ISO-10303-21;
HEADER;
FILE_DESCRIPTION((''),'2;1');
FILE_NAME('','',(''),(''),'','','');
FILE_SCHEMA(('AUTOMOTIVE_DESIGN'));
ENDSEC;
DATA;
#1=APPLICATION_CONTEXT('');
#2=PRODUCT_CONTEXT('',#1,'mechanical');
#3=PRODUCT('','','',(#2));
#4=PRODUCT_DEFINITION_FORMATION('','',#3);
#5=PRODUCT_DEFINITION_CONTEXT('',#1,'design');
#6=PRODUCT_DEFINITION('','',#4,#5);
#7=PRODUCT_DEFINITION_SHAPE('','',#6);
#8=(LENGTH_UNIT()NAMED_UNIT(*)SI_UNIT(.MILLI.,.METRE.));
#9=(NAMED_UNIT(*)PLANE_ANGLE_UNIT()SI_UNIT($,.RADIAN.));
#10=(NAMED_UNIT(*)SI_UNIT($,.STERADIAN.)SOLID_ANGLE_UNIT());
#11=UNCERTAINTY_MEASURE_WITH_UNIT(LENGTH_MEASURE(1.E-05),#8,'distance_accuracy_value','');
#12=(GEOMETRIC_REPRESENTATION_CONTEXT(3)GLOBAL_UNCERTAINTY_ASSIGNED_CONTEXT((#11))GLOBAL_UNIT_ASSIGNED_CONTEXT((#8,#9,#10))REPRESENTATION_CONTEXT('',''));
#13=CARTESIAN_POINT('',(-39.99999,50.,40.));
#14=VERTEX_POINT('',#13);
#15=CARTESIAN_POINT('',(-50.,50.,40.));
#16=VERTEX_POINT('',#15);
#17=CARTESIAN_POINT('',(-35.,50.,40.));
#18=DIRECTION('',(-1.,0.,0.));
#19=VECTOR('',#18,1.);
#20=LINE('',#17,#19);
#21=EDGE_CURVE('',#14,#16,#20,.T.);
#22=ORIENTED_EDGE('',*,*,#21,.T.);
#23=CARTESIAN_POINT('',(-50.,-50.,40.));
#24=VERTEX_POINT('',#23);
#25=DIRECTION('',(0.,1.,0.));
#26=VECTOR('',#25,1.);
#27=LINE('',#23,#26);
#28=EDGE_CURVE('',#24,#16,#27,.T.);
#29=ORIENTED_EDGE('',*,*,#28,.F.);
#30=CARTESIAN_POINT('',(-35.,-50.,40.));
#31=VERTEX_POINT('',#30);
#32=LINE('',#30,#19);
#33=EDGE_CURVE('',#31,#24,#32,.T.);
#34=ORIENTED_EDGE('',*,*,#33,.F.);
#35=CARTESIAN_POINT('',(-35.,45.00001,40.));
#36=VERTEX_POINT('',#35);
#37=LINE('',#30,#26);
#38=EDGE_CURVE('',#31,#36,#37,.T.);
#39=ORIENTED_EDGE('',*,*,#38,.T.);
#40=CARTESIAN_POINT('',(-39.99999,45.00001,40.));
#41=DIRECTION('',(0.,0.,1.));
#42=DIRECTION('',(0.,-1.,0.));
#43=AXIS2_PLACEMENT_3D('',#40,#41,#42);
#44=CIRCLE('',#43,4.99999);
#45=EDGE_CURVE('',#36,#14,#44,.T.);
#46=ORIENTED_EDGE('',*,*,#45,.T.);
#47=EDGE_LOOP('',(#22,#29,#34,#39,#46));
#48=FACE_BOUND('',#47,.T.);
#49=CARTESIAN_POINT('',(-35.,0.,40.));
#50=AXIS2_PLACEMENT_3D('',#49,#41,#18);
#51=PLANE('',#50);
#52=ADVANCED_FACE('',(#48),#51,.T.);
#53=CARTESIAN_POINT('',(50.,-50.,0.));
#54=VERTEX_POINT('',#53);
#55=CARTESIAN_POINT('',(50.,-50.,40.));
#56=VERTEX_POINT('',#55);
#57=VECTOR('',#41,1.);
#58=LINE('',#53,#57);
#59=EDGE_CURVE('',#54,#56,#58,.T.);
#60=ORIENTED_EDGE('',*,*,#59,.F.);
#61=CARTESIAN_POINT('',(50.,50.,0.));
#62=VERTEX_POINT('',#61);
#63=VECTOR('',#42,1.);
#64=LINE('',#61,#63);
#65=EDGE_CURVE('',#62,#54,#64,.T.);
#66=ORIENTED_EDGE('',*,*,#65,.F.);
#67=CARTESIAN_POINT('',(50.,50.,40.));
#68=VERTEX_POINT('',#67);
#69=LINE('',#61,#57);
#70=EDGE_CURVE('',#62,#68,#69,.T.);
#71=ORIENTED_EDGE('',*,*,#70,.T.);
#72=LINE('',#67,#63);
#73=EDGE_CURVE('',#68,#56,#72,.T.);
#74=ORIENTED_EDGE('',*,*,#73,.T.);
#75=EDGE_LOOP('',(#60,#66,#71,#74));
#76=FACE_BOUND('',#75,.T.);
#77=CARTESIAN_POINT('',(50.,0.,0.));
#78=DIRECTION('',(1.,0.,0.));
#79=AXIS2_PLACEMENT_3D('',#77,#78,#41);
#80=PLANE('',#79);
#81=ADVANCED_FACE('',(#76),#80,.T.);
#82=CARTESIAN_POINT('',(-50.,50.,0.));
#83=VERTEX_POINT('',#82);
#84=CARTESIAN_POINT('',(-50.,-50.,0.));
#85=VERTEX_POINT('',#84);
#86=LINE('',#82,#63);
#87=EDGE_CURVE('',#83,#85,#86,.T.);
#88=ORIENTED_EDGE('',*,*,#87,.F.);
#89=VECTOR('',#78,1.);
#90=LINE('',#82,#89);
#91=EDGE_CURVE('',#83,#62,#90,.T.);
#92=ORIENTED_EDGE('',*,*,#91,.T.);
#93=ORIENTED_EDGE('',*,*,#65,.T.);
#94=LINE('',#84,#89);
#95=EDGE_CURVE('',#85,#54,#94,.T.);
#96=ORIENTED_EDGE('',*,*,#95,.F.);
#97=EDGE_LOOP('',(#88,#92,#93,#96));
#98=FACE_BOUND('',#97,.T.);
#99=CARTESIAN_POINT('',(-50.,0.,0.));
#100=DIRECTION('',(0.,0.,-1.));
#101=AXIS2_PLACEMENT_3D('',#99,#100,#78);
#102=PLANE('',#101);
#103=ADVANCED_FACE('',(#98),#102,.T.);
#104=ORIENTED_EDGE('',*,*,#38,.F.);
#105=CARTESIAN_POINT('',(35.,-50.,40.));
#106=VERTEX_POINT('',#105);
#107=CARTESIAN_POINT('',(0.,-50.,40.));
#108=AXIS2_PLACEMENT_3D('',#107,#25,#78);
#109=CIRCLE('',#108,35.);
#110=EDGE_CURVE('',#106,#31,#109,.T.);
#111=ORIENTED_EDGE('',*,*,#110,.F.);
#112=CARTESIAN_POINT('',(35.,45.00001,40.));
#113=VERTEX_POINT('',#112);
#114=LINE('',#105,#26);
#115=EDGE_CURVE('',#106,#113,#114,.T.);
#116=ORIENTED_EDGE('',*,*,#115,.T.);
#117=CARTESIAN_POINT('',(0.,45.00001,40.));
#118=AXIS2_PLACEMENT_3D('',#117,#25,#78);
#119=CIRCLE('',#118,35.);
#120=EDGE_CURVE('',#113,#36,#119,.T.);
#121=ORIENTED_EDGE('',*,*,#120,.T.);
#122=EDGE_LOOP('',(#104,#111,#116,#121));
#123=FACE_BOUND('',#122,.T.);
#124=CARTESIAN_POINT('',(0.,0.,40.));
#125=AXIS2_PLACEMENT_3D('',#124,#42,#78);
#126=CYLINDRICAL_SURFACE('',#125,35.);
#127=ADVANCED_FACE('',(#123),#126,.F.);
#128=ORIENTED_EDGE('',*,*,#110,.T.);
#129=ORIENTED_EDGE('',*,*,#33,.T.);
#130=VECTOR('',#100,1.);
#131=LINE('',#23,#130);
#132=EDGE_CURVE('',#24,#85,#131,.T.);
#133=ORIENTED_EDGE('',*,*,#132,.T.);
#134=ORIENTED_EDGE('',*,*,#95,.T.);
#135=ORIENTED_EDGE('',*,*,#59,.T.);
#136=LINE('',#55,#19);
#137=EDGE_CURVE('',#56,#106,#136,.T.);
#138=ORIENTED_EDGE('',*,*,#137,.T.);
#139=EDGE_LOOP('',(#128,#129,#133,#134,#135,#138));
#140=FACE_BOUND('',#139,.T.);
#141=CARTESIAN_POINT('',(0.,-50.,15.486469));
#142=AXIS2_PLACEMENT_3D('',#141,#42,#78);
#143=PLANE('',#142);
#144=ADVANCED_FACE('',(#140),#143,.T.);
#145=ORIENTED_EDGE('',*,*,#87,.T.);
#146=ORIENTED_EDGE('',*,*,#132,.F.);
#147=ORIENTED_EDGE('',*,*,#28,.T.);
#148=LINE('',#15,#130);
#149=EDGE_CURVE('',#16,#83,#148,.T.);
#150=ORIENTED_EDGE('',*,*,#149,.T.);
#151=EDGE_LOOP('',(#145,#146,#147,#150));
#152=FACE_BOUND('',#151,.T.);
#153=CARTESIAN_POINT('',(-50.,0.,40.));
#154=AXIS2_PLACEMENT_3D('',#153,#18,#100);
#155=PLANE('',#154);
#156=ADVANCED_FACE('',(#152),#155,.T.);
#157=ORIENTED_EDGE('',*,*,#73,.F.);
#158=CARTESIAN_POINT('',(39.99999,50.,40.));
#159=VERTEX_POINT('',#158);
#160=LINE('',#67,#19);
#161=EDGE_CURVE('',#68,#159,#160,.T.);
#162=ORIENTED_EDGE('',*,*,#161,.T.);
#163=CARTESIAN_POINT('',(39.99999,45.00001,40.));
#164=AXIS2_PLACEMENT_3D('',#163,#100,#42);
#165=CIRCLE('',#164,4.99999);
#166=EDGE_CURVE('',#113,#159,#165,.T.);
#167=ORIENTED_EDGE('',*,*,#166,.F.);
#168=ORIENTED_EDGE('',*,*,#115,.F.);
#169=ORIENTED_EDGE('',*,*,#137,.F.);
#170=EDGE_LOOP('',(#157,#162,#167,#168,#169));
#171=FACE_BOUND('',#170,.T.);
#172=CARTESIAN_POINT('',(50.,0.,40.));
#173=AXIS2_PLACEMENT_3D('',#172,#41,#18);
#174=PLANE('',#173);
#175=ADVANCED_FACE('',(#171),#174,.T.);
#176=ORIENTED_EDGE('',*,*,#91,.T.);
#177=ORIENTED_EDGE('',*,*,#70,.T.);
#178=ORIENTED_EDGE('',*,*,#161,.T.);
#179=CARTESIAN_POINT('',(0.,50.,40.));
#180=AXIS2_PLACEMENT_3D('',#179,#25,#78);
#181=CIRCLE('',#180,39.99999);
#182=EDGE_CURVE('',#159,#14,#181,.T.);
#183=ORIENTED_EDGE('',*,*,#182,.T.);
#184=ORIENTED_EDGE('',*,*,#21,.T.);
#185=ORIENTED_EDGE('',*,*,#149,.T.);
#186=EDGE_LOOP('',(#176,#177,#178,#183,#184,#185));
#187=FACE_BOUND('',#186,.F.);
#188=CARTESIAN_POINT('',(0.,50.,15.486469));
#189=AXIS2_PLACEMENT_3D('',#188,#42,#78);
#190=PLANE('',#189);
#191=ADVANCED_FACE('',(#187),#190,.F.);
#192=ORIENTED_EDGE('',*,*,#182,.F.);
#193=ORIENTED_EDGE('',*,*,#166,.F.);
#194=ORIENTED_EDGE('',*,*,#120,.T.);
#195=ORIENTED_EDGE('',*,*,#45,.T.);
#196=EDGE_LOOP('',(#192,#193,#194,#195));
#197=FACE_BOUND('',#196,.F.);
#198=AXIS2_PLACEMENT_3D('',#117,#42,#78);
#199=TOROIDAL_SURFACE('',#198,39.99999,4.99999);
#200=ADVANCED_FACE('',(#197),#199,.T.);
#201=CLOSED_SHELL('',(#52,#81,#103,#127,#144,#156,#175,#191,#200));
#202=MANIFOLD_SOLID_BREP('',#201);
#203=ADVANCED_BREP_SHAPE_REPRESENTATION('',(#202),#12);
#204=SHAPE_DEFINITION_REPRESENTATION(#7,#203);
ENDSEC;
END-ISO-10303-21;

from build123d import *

# Parameters (mm, degrees)
F1_DEPTH = 50
F2_R     = 4.99999


# Not quite as in the source:
# - a fillet or chamfer is up to 0.001 mm smaller than in the source, because OpenCascade refuses the exact size


with BuildPart() as f1:
    # F0 (on Front) → F1 (new body, symmetric)
    with BuildSketch(Plane.XZ):
        with BuildLine():
            Line((-50, 40), (-50, 0))
            Line((-50, 0), (0, 0))
            Line((0, 0), (50, 0))
            Line((50, 0), (50, 40))
            Line((50, 40), (35, 40))
            ThreePointArc((35, 40), (0, 5), (-35, 40))
            Line((-35, 40), (-50, 40))
        make_face()
    extrude(amount=F1_DEPTH, both=True)

    # F2 (radius 5 in the source; OpenCascade refuses exactly that, so slightly less here)
    f2_edges = [f1.edges().sort_by_distance(p)[0] for p in [
        (0, 50, 5),
    ]]
    fillet(f2_edges, radius=F2_R)


solid = f1.part
